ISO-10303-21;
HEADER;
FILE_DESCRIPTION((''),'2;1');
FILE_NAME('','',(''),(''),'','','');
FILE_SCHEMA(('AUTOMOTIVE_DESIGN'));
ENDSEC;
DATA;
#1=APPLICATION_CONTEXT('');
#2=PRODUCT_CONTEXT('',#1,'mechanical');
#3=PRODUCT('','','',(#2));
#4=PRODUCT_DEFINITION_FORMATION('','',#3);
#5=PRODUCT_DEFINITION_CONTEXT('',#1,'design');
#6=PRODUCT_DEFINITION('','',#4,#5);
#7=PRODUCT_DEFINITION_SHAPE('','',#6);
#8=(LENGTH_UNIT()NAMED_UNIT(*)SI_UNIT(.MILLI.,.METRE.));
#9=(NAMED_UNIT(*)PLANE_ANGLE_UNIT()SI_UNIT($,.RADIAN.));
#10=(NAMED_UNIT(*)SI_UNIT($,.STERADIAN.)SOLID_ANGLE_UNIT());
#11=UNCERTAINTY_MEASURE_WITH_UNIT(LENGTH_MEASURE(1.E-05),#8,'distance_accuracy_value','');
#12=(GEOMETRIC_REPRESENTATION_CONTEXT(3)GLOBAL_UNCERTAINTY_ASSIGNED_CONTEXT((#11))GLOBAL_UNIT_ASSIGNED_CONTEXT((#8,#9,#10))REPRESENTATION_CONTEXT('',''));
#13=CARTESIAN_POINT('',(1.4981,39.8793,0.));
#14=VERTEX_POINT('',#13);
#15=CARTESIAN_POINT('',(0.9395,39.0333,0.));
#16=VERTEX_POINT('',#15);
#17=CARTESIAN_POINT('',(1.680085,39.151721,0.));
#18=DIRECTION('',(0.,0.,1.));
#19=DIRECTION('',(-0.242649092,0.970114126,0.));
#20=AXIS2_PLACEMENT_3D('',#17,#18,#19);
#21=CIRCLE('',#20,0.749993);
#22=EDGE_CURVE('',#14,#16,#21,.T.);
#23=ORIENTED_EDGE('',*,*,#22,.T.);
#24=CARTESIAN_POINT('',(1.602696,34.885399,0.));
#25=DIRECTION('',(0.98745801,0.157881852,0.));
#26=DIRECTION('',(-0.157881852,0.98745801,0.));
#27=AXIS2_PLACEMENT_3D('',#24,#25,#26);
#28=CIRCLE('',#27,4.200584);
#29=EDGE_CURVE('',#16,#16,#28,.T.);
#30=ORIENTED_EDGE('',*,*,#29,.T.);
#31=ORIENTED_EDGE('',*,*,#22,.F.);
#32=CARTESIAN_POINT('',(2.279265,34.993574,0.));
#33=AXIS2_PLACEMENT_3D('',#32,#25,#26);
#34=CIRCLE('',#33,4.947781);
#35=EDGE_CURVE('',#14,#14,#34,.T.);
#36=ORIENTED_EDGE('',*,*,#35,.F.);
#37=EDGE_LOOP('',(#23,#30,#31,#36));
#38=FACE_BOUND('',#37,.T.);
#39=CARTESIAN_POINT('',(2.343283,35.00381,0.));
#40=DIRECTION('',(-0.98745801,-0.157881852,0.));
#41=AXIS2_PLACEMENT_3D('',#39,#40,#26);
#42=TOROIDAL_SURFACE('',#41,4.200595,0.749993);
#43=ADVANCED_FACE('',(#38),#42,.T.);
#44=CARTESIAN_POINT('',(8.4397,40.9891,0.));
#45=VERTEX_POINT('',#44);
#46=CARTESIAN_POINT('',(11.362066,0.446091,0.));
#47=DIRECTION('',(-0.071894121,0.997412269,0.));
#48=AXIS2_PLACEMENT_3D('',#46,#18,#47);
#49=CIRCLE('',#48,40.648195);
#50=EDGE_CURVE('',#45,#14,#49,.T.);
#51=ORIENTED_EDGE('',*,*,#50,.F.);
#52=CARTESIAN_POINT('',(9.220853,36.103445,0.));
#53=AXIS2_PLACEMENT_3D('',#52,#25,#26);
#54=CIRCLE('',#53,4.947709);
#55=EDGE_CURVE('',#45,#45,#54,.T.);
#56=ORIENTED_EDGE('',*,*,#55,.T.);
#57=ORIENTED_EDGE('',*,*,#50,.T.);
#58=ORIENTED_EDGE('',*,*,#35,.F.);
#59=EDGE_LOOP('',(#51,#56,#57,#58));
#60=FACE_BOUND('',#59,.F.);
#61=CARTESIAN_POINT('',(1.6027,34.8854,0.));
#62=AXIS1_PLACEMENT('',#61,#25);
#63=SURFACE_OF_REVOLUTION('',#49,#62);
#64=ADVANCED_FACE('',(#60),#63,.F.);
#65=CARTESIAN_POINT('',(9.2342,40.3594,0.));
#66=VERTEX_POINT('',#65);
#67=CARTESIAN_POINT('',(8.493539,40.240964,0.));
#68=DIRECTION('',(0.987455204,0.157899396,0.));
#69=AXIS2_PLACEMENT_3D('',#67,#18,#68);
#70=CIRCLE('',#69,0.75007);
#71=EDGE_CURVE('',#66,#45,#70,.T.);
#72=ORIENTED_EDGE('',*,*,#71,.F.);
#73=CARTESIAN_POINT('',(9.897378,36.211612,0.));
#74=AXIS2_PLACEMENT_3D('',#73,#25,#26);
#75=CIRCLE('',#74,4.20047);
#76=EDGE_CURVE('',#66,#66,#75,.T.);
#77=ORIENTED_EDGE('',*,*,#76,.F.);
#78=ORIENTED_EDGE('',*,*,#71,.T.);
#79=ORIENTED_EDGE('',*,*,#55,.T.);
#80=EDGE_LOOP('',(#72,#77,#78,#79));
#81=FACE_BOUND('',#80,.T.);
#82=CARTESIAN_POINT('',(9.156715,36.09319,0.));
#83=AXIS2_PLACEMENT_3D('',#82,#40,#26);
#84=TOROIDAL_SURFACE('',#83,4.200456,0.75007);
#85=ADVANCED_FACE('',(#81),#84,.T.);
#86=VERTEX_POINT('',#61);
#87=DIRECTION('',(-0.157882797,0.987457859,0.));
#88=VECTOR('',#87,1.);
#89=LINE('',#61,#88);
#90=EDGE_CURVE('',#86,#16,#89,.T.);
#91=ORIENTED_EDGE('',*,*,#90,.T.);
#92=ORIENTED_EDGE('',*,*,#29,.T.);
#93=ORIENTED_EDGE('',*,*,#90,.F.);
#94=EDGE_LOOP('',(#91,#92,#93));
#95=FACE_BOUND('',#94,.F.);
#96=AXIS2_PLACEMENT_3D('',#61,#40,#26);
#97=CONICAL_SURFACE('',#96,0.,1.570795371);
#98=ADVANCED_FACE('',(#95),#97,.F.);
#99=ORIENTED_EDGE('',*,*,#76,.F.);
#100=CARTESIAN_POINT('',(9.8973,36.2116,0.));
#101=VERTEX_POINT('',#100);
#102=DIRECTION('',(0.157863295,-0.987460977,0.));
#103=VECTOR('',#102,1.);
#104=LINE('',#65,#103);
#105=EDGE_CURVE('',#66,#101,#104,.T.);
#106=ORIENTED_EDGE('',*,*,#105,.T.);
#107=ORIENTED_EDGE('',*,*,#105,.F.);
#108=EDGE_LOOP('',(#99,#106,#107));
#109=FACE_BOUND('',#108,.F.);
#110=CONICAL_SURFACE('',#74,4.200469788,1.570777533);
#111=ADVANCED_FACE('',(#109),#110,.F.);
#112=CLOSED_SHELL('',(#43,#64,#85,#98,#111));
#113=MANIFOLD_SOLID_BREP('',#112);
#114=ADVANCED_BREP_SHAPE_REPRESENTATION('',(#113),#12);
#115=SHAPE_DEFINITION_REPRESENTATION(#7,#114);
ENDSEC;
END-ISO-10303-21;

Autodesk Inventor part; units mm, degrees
sketch "Sketch_2" plane through (0, 0, 0) normal (0, 0, 1) x (1, 0, 0)
  line L0 (9.8973, 36.2116) -> (1.6027, 34.8854)
  line L1 (1.6027, 34.8854) -> (0.9395, 39.0333)
  arc A0 (1.4981, 39.8793) -> (0.9395, 39.0333) centre (1.6801, 39.1517) ccw
  arc A1 (8.4397, 40.9891) -> (1.4981, 39.8793) centre (11.3621, 0.4458) ccw
  arc A2 (9.2342, 40.3594) -> (8.4397, 40.9891) centre (8.4936, 40.241) ccw
  line L2 (9.2342, 40.3594) -> (9.8973, 36.2116)
  line L3 (9.8973, 36.2116) -> (1.6027, 34.8854)
revolve "Revolution1" add sketch "Sketch_2" angle 360 about axis through (9.8973, 36.2116, 0) along (0.9874599, 0.1578703, 0)
ref_plane "NO_GEO_XY" through (0, 0, 0) normal (1, 0, 0) x (0, 0, -1)
ref_plane "NO_GEO_YZ" through (0, 0, 0) normal (0, 0, -1) x (0, 1, 0)
ref_plane "NO_GEO_ZX" through (0, 0, 0) normal (0, 1, 0) x (1, 0, 0)
ref_plane "roller1_XY" through (0, 35.5485, 0) normal (1, 0, 0) x (0, 0, -1)
ref_plane "roller1_YZ" through (0, 35.5485, 0) normal (0, 0, -1) x (0, 1, 0)
ref_plane "roller1_ZX" through (0, 35.5485, 0) normal (0, 1, 0) x (1, 0, 0)
properties part number "21308 E_r1"
